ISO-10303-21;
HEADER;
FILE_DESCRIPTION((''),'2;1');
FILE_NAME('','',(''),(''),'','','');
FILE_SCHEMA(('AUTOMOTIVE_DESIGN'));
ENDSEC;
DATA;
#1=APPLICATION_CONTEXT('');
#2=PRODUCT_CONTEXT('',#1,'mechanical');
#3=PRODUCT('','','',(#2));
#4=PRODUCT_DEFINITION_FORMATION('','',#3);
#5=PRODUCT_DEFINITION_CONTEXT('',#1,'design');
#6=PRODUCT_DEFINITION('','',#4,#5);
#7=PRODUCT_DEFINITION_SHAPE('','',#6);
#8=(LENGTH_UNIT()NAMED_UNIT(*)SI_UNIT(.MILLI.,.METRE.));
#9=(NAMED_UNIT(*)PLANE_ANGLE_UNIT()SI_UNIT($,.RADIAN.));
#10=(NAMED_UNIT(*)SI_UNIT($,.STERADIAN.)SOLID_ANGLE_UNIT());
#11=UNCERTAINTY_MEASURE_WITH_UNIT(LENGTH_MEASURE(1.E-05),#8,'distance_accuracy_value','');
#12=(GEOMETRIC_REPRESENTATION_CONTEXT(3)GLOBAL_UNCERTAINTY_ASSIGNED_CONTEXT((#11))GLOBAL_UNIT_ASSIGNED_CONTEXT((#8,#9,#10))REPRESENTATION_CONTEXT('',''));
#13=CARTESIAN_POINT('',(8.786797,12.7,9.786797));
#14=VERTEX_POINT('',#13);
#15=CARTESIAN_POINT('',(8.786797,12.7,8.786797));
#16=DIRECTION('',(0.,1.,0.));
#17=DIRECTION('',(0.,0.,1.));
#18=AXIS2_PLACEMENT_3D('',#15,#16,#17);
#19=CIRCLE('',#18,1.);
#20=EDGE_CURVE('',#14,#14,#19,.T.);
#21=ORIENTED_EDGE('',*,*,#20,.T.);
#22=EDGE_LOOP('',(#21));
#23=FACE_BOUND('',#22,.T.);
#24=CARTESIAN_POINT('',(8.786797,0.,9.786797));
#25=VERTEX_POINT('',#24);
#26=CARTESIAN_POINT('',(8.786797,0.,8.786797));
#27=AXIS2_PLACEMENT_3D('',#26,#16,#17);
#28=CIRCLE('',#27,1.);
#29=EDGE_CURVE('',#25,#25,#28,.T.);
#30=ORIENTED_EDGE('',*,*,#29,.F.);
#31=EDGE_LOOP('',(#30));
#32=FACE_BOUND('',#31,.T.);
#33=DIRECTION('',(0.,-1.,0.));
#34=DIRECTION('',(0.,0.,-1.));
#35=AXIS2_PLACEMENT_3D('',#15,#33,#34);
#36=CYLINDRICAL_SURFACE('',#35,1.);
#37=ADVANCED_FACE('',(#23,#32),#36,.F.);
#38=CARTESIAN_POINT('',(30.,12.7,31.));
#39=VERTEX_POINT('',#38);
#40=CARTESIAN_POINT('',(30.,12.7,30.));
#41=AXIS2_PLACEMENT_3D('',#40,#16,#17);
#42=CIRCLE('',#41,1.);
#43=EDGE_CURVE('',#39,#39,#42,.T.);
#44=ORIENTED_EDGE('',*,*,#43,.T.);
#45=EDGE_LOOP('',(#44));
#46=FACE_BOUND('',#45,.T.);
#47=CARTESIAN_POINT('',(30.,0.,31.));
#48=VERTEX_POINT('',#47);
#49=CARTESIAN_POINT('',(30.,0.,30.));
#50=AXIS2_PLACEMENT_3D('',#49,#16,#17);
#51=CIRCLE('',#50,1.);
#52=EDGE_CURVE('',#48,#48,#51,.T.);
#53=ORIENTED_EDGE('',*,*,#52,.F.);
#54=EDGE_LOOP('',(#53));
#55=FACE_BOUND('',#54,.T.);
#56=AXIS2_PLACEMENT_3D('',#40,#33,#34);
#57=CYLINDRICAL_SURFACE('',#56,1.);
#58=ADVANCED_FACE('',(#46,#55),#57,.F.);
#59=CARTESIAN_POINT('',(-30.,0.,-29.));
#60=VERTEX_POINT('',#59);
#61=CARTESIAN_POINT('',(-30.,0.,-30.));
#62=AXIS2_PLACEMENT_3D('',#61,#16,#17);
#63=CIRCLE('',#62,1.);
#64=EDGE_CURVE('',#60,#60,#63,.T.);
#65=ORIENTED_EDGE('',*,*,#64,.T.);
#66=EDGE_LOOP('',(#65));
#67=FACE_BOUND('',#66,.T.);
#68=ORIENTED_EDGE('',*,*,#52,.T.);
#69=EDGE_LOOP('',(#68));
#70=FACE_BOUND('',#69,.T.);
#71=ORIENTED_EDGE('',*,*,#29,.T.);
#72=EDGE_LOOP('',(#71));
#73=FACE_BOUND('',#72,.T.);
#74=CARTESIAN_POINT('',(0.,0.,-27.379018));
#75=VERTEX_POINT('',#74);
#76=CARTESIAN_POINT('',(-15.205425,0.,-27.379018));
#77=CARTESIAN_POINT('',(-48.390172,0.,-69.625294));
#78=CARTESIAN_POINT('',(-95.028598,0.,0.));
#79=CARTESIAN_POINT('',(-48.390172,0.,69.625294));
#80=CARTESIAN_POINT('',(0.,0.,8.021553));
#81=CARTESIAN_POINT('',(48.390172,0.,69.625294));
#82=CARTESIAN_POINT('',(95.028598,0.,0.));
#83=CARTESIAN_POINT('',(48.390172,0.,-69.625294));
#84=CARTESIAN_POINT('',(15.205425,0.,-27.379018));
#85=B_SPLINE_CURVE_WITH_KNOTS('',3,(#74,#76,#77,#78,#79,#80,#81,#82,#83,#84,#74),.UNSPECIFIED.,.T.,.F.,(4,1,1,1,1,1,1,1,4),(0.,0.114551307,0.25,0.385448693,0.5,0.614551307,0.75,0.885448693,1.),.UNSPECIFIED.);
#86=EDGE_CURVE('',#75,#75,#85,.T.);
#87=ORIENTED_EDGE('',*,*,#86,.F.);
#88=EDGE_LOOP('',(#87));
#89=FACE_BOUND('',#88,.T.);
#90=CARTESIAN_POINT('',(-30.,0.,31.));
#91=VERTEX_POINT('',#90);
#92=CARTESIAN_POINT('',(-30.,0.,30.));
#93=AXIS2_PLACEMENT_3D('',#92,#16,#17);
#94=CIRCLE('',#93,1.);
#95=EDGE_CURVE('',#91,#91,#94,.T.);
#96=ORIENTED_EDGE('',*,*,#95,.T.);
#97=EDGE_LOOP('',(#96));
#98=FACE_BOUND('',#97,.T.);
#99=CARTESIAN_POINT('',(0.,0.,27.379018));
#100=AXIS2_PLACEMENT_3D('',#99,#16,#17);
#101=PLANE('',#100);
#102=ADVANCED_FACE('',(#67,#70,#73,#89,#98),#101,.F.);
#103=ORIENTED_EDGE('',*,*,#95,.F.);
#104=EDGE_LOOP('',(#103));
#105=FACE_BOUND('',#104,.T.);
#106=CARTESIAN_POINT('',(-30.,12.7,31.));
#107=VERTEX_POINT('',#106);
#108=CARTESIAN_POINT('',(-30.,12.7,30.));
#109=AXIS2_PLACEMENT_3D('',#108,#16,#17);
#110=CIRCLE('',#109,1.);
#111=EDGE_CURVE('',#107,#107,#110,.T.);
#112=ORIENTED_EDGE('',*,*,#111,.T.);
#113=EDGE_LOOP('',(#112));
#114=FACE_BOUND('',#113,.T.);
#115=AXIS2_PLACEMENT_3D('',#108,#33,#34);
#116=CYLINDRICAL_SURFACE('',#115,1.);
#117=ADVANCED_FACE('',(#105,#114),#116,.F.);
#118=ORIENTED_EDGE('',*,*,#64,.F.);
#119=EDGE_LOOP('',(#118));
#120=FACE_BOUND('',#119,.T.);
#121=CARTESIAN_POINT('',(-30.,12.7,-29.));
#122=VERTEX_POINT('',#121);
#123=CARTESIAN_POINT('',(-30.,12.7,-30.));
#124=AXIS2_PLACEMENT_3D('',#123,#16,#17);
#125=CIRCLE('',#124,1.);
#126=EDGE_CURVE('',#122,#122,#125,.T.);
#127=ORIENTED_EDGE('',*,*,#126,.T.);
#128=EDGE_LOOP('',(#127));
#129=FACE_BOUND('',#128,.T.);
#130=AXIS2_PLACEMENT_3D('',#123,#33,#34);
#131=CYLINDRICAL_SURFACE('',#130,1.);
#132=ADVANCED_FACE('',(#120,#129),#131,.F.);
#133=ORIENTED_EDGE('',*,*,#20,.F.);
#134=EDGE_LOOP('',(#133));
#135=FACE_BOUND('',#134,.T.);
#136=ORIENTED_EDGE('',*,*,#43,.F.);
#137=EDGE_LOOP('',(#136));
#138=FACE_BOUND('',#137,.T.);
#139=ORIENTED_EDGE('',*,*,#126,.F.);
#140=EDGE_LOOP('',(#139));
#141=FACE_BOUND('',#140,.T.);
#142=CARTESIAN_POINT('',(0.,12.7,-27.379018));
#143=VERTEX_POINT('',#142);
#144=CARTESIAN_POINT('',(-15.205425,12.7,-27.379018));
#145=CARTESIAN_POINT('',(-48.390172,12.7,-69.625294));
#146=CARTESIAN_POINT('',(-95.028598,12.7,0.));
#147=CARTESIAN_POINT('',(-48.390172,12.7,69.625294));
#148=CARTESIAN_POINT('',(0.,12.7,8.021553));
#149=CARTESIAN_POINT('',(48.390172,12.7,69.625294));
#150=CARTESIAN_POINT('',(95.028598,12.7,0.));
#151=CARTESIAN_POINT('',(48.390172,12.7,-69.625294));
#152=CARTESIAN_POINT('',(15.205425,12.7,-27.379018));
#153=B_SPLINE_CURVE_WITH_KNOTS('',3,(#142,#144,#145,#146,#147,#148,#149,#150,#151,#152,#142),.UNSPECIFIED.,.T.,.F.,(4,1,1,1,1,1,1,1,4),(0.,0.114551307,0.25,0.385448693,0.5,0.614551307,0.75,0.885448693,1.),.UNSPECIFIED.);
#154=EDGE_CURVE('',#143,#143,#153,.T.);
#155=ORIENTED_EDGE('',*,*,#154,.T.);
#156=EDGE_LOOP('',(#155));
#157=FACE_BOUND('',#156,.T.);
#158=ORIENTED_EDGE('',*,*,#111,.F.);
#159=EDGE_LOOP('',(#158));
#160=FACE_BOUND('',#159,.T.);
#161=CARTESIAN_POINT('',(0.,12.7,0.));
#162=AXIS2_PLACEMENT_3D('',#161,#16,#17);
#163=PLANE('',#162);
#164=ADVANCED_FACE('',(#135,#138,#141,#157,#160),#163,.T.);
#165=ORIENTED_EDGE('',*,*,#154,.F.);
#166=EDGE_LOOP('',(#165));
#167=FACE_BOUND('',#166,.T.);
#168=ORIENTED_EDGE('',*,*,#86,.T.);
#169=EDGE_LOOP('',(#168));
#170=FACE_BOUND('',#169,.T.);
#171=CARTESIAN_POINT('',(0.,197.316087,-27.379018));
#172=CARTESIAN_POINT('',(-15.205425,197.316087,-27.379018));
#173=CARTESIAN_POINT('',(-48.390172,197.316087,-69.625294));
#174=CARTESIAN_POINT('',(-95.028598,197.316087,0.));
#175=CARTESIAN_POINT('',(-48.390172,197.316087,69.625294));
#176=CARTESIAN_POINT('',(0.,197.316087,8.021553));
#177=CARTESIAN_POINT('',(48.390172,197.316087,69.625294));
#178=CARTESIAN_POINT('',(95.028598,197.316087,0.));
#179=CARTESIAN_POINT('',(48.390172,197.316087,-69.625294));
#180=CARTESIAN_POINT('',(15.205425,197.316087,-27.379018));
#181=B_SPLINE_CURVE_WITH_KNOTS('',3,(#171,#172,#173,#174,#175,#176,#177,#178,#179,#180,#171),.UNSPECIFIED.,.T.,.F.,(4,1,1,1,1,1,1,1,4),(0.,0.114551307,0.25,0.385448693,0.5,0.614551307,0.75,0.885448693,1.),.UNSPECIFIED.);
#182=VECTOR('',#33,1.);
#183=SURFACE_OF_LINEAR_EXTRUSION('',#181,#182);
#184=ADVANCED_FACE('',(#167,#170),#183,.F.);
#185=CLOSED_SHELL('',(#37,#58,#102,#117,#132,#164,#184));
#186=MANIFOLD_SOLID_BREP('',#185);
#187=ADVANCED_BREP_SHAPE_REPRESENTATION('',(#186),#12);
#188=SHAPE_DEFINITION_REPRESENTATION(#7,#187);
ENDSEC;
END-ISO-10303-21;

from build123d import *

# Parameters (mm, degrees)
PNPUSH_MARKER_PATTERN_SKETCH_DEPTH       = 12.7
SKETCH1_PNPUSH_MARKER_PATTERN_SKETCH_2_R = 1
CUT_EXTRUDE1_DEPTH                       = 93.891715355


# Read off the part's stored shape, not the designer's step: PNPush_Marker_Pattern_Sketch
with BuildPart() as part:
    # PNPush_Marker_Pattern_Sketch outline → PNPush_Marker_Pattern_Sketch (new body)
    with BuildSketch(Plane(origin=(0, 0, 0), x_dir=(1, 0, 0), z_dir=(0, 1, 0))):
        with BuildLine():
            add(Edge.make_bspline(
                [(0, 27.379017703), (-15.205424711, 27.379017703), (-48.390172134, 69.625294254), (-95.028597808, 0), (-48.390172134, -69.625294254), (0, -8.021552983), (48.390172134, -69.625294254), (95.028597808, 0), (48.390172134, 69.625294254), (15.205424711, 27.379017703), (0, 27.379017703)],
                knots=[0, 0, 0, 0, 0.114551307, 0.25, 0.385448693, 0.5, 0.614551307, 0.75, 0.885448693, 1, 1, 1, 1], degree=3))
        make_face()
    extrude(amount=PNPUSH_MARKER_PATTERN_SKETCH_DEPTH)

    # Sketch1-PNPush_Marker_Pattern_Sketch<2> → Cut-Extrude1 (cut, through all)
    with BuildSketch(Plane(origin=(0, 0, 0), x_dir=(1, 0, 0), z_dir=(0, 1, 0))):
        with Locations(Location((-30, 30, 0), (0, 0, 270))):
            Circle(SKETCH1_PNPUSH_MARKER_PATTERN_SKETCH_2_R)
        with Locations(Location((30, -30, 0), (0, 0, 270))):
            Circle(SKETCH1_PNPUSH_MARKER_PATTERN_SKETCH_2_R)
        with Locations(Location((-30, -30, 0), (0, 0, 270))):
            Circle(SKETCH1_PNPUSH_MARKER_PATTERN_SKETCH_2_R)
        with Locations(Location((8.786796564, -8.786796564, 0), (0, 0, 270))):
            Circle(SKETCH1_PNPUSH_MARKER_PATTERN_SKETCH_2_R)
    extrude(amount=CUT_EXTRUDE1_DEPTH, mode=Mode.SUBTRACT)


solid = part.part
